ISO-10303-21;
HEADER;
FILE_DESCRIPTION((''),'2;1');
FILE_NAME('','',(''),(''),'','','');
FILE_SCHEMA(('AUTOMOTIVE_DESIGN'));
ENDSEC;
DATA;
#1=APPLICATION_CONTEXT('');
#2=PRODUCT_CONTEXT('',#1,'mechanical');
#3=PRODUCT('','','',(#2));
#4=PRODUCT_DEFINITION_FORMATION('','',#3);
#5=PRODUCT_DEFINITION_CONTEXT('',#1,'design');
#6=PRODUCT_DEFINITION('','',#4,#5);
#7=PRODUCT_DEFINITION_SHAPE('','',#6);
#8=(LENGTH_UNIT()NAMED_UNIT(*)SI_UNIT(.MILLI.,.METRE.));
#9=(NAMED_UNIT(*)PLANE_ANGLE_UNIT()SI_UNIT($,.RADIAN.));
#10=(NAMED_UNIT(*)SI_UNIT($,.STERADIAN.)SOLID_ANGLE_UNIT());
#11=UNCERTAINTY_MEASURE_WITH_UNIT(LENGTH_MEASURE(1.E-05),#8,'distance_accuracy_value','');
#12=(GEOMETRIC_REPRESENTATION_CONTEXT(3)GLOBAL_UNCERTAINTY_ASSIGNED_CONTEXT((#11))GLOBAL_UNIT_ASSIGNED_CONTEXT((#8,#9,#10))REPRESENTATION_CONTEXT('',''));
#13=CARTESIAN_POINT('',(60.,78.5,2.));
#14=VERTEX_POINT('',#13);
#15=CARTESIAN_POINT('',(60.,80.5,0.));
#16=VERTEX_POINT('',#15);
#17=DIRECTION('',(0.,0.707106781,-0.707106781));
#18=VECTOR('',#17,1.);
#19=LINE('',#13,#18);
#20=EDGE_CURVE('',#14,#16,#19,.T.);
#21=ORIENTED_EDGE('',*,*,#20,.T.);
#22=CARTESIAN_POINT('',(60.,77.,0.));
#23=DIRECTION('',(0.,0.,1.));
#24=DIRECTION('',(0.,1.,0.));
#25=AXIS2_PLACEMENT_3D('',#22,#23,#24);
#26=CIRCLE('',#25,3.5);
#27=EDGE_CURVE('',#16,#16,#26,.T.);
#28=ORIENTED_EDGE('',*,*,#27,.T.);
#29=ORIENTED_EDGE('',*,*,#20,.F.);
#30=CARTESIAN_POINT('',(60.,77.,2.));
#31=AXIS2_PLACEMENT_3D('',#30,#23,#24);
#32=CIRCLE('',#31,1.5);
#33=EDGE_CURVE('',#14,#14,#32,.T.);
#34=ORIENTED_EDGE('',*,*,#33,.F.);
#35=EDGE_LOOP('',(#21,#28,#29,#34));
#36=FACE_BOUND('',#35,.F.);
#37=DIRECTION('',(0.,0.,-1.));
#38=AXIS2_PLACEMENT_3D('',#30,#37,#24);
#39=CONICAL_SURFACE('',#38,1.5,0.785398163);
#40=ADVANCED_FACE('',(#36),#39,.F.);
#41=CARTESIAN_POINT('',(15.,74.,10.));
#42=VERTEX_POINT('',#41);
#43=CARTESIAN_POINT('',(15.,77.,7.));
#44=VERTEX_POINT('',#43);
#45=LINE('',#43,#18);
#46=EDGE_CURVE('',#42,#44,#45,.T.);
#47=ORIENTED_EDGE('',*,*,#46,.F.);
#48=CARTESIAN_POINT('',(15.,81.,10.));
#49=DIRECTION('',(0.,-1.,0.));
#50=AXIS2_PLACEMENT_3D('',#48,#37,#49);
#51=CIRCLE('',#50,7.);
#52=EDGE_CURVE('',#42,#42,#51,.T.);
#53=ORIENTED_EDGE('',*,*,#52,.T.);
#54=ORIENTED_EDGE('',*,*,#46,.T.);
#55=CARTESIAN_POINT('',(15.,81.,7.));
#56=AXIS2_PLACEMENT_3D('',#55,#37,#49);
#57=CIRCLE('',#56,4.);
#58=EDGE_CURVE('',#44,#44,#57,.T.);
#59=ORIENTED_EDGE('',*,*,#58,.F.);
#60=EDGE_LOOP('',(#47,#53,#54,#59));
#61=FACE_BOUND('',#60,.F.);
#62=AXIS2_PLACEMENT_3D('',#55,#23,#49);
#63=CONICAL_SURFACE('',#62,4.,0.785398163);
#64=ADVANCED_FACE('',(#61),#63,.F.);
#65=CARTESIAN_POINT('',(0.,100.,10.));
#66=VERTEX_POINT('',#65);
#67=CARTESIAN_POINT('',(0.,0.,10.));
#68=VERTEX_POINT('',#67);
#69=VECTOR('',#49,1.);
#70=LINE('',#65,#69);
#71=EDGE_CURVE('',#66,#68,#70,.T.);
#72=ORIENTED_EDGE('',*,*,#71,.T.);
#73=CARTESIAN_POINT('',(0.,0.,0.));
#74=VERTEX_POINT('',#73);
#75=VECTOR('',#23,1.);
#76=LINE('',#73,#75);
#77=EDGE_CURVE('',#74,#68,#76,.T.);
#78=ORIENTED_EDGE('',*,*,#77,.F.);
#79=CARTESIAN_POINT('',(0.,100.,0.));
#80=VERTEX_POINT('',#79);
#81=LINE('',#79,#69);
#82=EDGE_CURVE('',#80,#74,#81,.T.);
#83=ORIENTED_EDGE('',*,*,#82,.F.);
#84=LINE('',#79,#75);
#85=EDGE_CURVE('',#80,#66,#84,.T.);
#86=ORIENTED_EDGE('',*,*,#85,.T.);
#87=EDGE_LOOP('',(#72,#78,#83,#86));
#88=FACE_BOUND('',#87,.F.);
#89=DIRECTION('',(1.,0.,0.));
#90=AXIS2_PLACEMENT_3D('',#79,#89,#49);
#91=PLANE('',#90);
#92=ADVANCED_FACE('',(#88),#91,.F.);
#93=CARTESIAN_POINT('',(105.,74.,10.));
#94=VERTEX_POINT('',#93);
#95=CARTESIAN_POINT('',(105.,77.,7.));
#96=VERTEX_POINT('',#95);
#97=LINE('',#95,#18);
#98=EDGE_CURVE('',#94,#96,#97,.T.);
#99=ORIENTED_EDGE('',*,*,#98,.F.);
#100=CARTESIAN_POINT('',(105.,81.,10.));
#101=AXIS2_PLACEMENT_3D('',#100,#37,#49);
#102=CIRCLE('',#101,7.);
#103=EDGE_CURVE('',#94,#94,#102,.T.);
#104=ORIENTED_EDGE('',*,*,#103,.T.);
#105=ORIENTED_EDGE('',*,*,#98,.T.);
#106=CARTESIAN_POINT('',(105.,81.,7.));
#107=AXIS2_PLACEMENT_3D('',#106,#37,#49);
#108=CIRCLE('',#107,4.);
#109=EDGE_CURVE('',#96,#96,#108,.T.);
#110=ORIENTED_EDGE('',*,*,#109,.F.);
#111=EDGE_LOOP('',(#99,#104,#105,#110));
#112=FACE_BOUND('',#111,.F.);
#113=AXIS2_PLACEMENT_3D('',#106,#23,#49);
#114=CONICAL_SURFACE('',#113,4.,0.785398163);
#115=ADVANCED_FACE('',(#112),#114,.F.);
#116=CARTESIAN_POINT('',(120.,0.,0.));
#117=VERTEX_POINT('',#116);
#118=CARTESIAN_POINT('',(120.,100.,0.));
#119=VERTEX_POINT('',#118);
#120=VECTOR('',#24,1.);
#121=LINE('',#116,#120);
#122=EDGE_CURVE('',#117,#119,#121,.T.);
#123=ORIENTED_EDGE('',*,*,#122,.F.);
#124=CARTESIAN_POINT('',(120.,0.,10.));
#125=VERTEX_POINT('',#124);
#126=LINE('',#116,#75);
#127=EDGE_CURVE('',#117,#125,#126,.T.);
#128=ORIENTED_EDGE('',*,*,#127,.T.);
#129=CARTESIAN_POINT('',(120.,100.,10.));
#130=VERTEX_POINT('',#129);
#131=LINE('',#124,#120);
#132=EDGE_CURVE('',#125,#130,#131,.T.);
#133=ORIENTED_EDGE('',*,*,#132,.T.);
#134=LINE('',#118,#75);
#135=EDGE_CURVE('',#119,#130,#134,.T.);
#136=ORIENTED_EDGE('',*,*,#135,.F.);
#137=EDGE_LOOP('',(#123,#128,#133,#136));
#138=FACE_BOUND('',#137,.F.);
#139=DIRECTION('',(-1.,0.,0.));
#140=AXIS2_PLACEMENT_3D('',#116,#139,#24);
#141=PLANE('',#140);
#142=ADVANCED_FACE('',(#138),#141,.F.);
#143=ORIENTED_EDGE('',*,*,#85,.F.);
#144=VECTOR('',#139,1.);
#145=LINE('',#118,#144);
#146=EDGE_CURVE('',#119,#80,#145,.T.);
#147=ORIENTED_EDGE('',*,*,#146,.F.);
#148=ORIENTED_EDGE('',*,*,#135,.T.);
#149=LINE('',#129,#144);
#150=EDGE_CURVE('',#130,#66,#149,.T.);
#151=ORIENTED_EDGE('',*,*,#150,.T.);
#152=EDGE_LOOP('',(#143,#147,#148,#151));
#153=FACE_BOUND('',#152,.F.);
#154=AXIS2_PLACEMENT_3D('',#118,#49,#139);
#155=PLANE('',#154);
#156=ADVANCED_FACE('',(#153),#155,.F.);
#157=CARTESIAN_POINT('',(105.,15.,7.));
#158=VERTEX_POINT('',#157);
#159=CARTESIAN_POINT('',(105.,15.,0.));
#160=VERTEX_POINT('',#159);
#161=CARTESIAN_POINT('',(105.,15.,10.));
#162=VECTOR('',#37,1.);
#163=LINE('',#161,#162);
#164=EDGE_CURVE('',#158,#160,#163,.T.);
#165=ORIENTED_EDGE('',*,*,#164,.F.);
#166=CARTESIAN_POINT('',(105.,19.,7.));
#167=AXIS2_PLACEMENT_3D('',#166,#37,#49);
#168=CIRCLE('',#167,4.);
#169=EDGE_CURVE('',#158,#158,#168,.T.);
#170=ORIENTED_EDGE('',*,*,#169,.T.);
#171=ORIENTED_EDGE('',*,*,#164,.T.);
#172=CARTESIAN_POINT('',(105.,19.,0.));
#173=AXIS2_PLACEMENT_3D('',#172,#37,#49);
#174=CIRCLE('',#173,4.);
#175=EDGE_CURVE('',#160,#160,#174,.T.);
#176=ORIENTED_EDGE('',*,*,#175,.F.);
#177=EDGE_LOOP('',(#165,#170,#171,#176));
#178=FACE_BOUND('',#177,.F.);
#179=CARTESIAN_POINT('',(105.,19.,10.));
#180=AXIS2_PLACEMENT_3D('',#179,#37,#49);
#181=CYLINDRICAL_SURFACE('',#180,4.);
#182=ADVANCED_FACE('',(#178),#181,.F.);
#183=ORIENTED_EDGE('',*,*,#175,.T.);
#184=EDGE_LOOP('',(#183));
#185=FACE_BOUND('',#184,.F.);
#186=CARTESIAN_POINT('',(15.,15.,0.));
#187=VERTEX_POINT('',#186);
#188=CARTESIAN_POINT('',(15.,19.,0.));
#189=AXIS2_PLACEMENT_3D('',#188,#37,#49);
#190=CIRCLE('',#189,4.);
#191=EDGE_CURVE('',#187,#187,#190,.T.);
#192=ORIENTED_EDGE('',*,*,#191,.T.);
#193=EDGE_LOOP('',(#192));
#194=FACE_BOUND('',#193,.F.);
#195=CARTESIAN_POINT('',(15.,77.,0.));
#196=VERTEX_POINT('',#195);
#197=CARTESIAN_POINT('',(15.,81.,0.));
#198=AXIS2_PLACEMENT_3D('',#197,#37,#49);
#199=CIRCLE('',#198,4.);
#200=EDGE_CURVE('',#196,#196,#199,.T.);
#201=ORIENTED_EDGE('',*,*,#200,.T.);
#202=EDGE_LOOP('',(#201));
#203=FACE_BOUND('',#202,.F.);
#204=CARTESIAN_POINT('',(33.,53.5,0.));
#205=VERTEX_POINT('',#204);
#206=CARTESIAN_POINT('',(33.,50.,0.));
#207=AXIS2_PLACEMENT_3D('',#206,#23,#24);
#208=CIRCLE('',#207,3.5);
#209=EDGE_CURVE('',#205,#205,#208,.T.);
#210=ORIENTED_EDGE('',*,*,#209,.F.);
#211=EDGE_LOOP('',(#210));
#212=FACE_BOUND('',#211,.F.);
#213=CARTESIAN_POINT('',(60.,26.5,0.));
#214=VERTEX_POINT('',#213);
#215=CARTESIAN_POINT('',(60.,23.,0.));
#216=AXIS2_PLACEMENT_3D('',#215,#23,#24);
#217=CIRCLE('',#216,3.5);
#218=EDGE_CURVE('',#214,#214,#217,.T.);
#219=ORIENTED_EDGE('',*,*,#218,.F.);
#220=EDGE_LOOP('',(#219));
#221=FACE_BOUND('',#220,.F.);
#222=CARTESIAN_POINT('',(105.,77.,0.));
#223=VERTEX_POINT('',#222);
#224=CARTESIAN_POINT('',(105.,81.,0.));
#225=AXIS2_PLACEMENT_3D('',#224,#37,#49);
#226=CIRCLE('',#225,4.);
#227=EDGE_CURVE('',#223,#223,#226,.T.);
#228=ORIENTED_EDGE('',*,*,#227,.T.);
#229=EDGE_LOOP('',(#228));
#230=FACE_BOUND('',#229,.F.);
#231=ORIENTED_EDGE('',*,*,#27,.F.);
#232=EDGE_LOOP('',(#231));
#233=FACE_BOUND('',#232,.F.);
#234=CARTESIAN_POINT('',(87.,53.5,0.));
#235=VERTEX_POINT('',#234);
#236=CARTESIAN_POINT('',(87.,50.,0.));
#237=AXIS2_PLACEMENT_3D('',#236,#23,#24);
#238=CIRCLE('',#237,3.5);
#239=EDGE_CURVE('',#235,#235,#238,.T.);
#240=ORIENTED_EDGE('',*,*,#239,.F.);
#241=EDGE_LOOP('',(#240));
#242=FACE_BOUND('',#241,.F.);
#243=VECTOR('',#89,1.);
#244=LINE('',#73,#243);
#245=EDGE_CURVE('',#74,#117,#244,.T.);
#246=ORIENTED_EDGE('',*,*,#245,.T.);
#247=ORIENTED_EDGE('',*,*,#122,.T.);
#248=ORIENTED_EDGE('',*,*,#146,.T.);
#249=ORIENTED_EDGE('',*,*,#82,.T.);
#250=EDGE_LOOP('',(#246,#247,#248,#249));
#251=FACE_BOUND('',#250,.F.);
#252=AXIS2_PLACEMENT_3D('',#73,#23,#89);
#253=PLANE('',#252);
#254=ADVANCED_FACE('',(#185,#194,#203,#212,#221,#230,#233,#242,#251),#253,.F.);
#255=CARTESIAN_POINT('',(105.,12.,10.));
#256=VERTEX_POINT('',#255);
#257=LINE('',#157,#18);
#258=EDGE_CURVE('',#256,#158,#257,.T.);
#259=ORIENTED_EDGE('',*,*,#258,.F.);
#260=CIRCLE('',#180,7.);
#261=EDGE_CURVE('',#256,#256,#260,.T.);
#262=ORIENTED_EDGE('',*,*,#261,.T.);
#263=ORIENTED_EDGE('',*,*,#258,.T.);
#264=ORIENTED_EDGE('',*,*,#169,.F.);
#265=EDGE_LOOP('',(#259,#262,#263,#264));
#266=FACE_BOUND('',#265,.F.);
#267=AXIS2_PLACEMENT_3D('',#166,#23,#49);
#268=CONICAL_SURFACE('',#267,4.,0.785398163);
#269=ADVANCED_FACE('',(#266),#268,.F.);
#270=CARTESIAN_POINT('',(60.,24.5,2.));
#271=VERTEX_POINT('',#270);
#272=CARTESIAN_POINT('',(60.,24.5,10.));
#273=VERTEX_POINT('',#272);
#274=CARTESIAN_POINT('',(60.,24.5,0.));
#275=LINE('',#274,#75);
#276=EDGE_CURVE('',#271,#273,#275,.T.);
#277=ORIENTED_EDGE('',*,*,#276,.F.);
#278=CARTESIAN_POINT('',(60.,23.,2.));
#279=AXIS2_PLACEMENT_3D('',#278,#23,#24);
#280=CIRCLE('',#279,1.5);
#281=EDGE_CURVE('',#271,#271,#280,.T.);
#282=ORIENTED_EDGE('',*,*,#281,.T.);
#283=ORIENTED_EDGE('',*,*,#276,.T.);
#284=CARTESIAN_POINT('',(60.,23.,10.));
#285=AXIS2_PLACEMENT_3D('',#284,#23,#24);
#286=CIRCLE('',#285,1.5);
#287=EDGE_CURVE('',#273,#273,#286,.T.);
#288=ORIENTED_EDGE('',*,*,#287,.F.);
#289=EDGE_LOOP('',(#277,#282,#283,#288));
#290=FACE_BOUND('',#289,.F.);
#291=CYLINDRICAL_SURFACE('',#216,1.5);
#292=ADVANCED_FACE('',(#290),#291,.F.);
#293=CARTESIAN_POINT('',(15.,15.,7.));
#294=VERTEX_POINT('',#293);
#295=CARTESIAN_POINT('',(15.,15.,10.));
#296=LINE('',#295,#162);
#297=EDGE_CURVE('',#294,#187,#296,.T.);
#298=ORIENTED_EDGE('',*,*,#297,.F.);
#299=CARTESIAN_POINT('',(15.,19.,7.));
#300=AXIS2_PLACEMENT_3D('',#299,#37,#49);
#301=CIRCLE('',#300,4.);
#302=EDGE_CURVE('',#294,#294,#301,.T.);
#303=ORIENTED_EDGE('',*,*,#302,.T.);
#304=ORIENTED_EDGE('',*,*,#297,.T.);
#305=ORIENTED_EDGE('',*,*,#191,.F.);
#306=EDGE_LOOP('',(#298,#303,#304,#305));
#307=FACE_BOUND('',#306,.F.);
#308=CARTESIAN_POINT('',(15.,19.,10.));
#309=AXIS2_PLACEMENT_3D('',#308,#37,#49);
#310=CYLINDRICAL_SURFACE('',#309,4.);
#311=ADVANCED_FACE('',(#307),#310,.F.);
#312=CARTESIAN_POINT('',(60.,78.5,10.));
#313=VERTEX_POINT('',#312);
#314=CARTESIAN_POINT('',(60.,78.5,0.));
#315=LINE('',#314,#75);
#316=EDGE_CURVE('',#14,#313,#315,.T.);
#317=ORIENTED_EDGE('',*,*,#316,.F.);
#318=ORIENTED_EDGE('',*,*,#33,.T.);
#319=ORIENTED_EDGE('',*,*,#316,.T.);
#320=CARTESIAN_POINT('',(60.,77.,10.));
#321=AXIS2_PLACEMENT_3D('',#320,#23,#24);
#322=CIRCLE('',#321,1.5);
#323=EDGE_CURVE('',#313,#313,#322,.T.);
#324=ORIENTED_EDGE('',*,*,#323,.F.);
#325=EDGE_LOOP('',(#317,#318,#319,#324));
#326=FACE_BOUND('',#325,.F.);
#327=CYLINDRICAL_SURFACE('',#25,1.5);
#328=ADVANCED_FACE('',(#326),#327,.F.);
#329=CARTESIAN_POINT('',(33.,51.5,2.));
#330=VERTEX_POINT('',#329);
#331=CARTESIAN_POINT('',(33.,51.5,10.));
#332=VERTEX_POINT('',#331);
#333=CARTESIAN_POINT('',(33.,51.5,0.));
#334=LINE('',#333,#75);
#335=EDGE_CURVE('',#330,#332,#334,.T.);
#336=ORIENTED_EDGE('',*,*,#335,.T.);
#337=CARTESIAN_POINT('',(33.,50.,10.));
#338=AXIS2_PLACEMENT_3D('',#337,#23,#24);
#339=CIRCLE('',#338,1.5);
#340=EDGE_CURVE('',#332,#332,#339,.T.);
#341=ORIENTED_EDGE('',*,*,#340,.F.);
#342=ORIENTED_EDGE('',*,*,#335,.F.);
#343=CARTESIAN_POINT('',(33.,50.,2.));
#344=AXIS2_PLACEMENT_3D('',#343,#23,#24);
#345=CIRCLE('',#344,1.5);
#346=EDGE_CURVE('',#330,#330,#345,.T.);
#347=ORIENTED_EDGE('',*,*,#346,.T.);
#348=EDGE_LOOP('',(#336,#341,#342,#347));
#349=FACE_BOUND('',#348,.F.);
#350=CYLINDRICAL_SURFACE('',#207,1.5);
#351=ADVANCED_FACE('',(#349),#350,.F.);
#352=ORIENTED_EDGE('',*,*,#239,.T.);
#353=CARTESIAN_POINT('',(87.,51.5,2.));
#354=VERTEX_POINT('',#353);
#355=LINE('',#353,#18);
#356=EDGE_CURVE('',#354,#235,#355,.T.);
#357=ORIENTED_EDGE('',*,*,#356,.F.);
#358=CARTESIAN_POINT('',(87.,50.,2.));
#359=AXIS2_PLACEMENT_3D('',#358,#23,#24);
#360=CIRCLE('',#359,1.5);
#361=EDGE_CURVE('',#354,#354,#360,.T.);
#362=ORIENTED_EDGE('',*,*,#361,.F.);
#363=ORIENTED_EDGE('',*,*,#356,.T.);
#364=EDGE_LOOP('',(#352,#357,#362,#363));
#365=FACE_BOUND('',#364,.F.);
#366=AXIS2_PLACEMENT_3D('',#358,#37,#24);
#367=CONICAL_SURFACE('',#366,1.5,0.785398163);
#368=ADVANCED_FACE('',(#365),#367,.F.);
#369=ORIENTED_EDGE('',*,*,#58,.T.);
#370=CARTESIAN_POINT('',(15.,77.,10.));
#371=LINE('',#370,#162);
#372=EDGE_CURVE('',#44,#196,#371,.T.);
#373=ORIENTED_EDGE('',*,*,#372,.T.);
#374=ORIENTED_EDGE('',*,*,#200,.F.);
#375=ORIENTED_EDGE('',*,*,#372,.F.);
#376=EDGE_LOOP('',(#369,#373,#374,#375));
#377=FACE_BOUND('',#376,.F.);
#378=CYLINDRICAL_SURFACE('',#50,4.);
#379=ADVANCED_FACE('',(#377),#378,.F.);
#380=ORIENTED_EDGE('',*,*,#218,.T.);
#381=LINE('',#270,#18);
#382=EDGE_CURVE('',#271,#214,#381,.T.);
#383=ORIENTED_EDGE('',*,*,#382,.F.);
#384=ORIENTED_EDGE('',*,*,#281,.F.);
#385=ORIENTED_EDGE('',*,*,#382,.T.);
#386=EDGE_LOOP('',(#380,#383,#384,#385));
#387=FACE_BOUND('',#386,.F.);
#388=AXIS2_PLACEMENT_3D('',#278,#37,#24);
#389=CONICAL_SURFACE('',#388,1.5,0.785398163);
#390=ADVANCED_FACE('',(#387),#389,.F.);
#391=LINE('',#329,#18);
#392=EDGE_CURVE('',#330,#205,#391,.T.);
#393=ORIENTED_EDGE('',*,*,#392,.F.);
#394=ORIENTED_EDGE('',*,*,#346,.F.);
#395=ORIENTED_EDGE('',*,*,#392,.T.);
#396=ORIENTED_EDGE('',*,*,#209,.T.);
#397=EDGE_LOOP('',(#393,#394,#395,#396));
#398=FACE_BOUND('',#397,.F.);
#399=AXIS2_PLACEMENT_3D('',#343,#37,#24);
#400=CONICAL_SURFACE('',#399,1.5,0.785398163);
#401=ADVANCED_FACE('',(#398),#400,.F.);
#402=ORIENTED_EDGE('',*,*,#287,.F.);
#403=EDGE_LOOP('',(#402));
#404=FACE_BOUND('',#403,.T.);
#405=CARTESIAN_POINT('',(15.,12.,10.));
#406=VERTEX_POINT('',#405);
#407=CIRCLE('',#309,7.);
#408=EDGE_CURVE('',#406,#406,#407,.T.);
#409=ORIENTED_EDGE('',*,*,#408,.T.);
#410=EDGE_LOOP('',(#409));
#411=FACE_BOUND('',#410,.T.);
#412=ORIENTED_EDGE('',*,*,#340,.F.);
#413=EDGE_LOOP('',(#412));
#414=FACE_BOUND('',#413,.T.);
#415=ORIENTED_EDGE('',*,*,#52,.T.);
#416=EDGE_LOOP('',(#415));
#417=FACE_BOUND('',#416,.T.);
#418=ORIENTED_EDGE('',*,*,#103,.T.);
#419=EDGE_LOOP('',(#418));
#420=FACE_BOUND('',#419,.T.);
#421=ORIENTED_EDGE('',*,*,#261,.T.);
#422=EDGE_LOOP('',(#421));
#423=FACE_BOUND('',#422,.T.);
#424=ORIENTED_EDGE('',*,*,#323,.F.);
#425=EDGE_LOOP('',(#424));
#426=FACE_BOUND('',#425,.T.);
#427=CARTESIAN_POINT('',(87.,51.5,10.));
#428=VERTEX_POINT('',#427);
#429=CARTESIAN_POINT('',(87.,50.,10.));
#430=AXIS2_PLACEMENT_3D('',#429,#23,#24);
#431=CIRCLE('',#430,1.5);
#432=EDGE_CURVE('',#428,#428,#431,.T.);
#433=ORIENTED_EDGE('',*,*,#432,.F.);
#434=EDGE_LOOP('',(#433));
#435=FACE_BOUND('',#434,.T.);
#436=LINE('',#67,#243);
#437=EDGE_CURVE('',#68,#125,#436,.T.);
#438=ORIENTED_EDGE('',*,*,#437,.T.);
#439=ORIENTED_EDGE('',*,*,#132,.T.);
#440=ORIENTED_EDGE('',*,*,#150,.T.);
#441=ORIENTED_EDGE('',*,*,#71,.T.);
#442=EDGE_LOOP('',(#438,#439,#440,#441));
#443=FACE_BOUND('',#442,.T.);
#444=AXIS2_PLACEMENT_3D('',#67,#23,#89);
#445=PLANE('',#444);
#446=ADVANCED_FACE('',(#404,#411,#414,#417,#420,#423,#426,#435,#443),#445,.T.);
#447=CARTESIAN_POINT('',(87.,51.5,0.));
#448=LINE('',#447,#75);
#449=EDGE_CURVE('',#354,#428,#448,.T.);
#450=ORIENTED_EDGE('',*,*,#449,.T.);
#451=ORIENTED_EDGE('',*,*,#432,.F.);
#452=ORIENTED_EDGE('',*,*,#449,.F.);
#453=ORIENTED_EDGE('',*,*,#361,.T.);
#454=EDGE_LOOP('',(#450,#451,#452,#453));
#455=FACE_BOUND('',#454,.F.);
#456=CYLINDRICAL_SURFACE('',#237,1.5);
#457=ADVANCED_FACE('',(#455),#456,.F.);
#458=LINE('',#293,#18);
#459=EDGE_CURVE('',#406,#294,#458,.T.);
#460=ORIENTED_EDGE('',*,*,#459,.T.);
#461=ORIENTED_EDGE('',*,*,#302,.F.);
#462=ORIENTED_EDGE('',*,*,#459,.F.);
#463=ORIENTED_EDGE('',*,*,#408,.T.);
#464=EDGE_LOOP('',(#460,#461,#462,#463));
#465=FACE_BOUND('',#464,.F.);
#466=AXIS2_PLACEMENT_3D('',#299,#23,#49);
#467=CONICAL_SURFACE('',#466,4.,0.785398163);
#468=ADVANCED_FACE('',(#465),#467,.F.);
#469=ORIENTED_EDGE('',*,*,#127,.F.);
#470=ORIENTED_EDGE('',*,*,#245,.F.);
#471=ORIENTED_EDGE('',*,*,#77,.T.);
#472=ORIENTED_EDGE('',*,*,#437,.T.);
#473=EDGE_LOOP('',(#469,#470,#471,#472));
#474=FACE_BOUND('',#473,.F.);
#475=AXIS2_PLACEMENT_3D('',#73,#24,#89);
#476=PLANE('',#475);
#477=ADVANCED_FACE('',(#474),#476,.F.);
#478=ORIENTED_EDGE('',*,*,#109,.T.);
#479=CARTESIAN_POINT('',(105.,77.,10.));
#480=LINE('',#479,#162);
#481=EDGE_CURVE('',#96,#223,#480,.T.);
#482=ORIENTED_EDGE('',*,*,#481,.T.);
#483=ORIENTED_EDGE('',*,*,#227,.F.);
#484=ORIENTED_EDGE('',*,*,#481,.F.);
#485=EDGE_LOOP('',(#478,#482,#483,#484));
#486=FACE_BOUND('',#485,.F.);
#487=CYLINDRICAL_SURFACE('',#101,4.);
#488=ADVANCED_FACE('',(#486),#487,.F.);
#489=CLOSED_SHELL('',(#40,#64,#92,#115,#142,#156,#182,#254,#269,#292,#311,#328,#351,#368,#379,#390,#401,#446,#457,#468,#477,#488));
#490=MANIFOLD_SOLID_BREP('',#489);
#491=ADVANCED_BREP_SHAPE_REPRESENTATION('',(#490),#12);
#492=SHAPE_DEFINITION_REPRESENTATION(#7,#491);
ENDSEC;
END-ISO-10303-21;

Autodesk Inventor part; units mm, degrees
ref_plane "YZ Plane" through (0, 0, 0) normal (1, 0, 0) x (0, 1, 0)
ref_plane "XZ Plane" through (0, 0, 0) normal (0, 1, 0) x (-1, 0, 0)
ref_plane "XY Plane" through (0, 0, 0) normal (0, 0, 1) x (1, 0, 0)
sketch "Sketch1" plane through (0, 0, 0) normal (0, 0, 1) x (1, 0, 0)
  line L0 (0, 0) -> (120, 0)
  line L1 (120, 0) -> (120, 100)
  line L2 (120, 100) -> (0, 100)
  line L3 (0, 100) -> (0, 0)
  dimension "d0" = 120
  dimension "d1" = 100
extrude "Extrusion1" add sketch "Sketch1" along normal blind 10
sketch "Sketch2" plane through (0, 0, 10) normal (0, 0, 1) x (1, 0, 0)
  line L0 (15, 19) -> (105, 19) construction
  line L1 (105, 19) -> (105, 81) construction
  line L2 (105, 81) -> (15, 81) construction
  line L3 (15, 81) -> (15, 19) construction
  circle A0 centre (60, 50) radius 8 construction
  line L4 (15, 19) -> (105, 81) construction
  line L5 (105, 19) -> (15, 81) construction
  point P0 (0, 0)
  dimension "d5" = 90
  dimension "d6" = 62
hole "Hole1" at (15, 81, 10) at (105, 81, 10) at (105, 19, 10) at (15, 19, 10) direction (0, 0, -1) diameter 8 end through all
chamfer "Chamfer1" distance 3 angle 45 1 edges at (15, 85, 10)
chamfer "Chamfer2" distance 3 angle 45 3 edges at (105, 85, 10) (105, 23, 10) (15, 23, 10)
sketch "Sketch3" plane through (0, 0, 0) normal (0, 0, -1) x (-1, 0, 0)
  circle A0 centre (-60, 50) radius 8 construction
  circle A1 centre (-60, 50) radius 27 construction
  point P0 (0, 0)
  point P1 (-60, 77)
  point P2 (-87, 50)
  point P3 (-60, 23)
  point P4 (-33, 50)
  dimension "d20" = 54
  dimension "d23" = 360
hole "Hole2" at (60, 77, 0) at (87, 50, 0) at (60, 23, 0) at (33, 50, 0) direction (0, 0, 1) diameter 3 end through all
chamfer "Chamfer3" distance 2 angle 45 4 edges at (60, 75.5, 0) (33, 48.5, 0) (60, 21.5, 0) (87, 48.5, 0)
properties part number "mounting_plate" material "Aluminum 6061"
